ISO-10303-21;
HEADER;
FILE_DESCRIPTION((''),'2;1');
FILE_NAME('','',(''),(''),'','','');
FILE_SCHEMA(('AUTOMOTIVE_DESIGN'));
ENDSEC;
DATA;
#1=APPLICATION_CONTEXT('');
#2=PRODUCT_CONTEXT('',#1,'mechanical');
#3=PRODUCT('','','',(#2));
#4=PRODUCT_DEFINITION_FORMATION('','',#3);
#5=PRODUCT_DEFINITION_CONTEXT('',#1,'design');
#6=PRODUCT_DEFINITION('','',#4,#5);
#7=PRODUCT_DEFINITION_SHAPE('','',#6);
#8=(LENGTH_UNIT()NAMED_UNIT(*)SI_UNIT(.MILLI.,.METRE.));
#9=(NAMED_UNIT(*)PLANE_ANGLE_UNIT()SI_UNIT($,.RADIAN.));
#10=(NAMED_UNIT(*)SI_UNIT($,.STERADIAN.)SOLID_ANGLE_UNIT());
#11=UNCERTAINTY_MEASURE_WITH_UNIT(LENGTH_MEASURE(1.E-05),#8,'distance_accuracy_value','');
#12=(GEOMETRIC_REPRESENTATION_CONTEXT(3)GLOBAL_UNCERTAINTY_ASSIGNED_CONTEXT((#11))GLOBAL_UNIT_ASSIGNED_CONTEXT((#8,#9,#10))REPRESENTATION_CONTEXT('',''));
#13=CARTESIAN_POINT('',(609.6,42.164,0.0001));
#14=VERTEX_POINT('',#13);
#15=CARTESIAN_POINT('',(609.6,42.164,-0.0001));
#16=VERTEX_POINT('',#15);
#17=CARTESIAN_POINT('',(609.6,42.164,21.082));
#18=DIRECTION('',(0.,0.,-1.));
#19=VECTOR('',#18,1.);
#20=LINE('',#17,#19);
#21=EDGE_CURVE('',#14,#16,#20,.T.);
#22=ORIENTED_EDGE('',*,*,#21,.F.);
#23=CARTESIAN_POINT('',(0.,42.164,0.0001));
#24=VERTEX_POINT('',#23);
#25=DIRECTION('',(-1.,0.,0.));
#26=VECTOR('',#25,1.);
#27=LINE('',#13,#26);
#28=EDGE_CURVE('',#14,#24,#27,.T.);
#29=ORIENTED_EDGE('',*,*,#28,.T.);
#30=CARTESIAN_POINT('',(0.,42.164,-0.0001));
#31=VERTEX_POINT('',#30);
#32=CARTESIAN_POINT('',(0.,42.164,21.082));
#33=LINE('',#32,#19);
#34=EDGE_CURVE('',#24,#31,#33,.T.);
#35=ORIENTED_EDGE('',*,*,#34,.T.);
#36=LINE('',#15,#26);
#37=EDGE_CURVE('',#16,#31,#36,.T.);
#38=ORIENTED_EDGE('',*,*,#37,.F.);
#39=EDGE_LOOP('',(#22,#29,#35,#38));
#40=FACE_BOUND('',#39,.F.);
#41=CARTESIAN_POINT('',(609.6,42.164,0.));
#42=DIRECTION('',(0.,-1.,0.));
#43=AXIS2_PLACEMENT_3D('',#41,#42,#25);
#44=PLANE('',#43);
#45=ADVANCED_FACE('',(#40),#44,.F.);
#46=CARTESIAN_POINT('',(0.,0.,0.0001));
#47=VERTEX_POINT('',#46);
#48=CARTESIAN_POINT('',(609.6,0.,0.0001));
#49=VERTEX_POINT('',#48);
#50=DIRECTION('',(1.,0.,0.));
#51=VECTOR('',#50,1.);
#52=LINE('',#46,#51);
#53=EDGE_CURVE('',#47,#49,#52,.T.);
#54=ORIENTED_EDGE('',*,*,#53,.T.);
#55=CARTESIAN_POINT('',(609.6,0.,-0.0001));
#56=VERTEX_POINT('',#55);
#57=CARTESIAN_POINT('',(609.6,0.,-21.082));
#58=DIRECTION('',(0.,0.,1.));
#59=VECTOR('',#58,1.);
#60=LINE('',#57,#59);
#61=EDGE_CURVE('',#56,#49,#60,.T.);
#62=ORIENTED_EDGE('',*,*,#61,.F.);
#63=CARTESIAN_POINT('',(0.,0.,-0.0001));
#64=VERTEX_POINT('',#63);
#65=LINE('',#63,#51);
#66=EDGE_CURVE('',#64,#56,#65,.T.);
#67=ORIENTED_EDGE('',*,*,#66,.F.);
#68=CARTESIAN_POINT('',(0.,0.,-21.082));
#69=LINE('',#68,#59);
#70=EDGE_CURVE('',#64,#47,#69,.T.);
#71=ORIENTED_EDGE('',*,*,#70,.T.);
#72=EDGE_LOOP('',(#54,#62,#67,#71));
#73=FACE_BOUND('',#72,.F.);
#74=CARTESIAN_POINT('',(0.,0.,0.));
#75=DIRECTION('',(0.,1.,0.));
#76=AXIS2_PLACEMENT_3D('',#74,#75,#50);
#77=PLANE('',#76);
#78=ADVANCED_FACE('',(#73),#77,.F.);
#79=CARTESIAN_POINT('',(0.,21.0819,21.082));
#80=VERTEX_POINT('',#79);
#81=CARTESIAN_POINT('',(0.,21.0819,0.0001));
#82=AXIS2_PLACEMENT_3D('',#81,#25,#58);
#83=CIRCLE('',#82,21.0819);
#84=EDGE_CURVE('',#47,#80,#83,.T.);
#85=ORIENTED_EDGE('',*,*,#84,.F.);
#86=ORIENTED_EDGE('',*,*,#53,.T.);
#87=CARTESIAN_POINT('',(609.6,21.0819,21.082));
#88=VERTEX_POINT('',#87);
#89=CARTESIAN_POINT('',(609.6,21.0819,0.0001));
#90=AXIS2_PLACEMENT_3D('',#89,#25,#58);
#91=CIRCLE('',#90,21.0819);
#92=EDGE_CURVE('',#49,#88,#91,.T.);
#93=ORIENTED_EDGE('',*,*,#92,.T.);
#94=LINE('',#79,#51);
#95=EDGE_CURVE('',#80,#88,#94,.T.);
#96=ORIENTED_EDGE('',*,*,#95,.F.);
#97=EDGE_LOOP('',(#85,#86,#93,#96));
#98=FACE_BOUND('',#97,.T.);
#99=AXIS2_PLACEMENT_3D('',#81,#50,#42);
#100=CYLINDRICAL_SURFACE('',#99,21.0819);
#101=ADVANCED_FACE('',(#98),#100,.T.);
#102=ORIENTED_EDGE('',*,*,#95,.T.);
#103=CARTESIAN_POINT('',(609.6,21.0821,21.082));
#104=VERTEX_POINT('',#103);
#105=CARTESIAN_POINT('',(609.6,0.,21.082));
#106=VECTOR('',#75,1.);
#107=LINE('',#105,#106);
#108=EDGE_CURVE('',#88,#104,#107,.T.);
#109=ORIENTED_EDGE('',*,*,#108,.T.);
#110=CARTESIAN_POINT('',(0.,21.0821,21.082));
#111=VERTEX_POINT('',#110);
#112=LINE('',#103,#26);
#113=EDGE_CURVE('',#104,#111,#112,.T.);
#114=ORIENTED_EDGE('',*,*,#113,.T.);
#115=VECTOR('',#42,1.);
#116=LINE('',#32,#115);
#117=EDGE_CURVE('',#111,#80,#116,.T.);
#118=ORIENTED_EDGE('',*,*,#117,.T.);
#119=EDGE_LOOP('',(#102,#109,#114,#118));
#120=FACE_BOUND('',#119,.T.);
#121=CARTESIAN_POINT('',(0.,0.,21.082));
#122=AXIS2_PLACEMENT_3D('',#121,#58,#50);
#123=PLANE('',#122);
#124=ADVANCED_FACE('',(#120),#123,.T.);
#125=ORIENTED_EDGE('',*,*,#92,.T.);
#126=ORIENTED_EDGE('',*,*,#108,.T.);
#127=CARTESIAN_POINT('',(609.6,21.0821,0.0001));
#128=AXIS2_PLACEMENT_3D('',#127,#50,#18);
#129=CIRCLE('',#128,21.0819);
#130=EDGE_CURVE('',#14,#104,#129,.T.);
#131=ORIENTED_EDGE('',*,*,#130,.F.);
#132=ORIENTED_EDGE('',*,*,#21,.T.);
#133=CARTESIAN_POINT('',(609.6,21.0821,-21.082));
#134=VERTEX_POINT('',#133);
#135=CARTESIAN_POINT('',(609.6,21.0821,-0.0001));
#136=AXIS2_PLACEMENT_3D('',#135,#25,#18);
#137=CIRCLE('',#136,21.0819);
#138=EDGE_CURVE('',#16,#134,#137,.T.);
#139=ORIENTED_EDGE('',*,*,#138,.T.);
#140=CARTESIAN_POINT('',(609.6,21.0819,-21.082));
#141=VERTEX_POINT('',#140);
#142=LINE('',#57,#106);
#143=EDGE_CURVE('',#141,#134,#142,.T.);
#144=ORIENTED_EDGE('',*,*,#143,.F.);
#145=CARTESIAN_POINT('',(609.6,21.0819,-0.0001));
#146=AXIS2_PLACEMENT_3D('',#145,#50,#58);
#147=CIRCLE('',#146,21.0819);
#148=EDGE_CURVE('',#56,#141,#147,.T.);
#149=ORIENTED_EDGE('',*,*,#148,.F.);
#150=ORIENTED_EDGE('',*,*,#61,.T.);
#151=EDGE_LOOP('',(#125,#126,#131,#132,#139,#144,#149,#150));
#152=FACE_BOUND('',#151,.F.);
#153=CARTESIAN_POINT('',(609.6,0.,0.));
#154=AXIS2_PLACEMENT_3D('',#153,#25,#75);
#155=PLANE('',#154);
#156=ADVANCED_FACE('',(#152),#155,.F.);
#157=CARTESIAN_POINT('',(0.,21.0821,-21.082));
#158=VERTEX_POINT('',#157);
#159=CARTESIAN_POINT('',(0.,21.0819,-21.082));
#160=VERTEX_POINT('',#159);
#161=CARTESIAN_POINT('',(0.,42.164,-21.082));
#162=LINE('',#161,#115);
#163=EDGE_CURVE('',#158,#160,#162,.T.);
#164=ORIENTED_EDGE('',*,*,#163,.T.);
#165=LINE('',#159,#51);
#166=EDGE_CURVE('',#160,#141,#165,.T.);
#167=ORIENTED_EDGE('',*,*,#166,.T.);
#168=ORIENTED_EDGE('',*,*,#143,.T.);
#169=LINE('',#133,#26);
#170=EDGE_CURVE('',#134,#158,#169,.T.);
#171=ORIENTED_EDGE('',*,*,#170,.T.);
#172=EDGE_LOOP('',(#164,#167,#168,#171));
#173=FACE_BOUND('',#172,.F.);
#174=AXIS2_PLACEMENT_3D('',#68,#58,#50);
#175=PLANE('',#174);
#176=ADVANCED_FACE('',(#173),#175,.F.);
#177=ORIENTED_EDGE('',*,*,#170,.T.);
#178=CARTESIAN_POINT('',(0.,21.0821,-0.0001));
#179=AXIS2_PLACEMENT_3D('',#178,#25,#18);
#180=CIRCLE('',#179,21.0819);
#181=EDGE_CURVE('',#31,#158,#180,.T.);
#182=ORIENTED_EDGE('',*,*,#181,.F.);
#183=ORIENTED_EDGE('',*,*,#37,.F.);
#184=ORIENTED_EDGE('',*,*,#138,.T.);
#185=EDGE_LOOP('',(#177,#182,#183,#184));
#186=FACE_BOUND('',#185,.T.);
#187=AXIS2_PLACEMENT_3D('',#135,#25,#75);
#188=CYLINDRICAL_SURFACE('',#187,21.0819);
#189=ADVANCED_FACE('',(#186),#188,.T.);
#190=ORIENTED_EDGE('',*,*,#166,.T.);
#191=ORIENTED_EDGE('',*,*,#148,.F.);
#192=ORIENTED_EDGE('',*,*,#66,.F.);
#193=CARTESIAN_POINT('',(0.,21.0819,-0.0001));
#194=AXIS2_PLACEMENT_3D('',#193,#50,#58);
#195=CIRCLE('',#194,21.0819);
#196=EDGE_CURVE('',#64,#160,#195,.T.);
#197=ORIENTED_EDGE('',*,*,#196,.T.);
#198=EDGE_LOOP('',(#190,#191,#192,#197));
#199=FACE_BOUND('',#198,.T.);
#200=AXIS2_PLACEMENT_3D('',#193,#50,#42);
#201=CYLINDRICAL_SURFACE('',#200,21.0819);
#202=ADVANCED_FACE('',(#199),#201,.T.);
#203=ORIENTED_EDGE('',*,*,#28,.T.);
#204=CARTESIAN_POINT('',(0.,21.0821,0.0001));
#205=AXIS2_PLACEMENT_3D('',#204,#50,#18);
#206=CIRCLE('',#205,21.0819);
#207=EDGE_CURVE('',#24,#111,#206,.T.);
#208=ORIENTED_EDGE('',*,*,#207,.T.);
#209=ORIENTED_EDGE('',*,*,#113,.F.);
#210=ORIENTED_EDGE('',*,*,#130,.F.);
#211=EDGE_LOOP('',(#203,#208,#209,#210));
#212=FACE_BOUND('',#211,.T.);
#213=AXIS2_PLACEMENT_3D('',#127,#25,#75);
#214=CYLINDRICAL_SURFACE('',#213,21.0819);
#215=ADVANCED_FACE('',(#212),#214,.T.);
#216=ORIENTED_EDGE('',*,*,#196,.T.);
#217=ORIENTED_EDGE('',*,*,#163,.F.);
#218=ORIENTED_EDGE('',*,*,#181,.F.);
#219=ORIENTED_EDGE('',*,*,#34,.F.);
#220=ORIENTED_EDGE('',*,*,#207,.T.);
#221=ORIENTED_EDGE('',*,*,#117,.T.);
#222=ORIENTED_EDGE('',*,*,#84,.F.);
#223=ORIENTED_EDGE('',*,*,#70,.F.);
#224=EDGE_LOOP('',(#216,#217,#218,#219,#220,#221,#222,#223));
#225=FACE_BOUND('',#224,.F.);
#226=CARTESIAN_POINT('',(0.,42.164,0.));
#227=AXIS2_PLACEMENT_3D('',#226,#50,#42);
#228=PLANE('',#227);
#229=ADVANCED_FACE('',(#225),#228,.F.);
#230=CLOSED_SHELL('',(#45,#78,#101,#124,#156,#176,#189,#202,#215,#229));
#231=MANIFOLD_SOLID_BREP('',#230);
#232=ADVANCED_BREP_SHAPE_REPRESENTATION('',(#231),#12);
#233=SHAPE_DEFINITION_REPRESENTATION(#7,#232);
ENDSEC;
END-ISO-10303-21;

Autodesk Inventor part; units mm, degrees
ref_plane "YZ Plane" through (0, 0, 0) normal (1, 0, 0) x (0, 1, 0)
sketch "1.90 Caprail" plane through (0, 0, 0) normal (0, 0, 1) x (1, 0, 0)
  line L0 (-57.7384, 25.6152) -> (-57.7384, 36.7912) construction
  arc A0 (-65.9934, 36.7912) -> (-67.5174, 35.2672) centre (-65.9934, 35.2672) ccw
  arc A1 (-47.9594, 35.2672) -> (-49.4834, 36.7912) centre (-49.4834, 35.2672) ccw
  arc A2 (-69.8345, 6.4876) -> (-69.016, 6.9384) centre (-69.5494, 6.9384) ccw
  line L1 (-69.016, 6.9384) -> (-69.016, 35.2672)
  arc A3 (-65.9934, 38.2898) -> (-69.016, 35.2672) centre (-65.9934, 35.2672) ccw
  line L2 (-65.9934, 38.2898) -> (-49.4834, 38.2898)
  arc A4 (-46.4608, 35.2672) -> (-49.4834, 38.2898) centre (-49.4834, 35.2672) ccw
  line L3 (-46.4608, 35.2672) -> (-46.4608, 6.9384)
  arc A5 (-46.4608, 6.9384) -> (-45.6423, 6.4876) centre (-45.9274, 6.9384) ccw
  arc A6 (-45.6423, 6.4876) -> (-69.8345, 6.4876) centre (-57.7384, 25.6152) ccw
  line L4 (-47.9594, 6.9384) -> (-47.9594, 35.2672)
  line L5 (-49.4834, 36.7912) -> (-65.9934, 36.7912)
  line L6 (-67.5174, 35.2672) -> (-67.5174, 6.9384)
  arc A7 (-70.5058, 5.1455) -> (-67.5174, 6.9384) centre (-69.5494, 6.9384) ccw
  arc A8 (-47.9594, 6.9384) -> (-44.9711, 5.1455) centre (-45.9274, 6.9384) ccw
  arc A9 (-70.5083, 5.1411) -> (-44.9685, 5.1411) centre (-57.7384, 25.6152) ccw
  circle A10 centre (-57.7384, 25.6152) radius 24.13 construction
  arc A11 (-70.5058, 5.1455) -> (-70.5083, 5.1411) centre (-70.507, 5.1433) ccw
  arc A12 (-44.9685, 5.1411) -> (-44.9711, 5.1455) centre (-44.9699, 5.1433) ccw
  point P0 (-47.9594, 36.7912)
  point P1 (-67.5174, 36.7912)
  dimension "d0" = 48.26
  dimension "d1" = 19.558
  dimension "d2" = 2.032
  dimension "d3" = 11.176
  dimension "d4" = 1.524
  dimension "d5" = 1.4986
  dimension "d6" = 0.0025
sketch "1.66 Caprail" plane through (0, 0, 0) normal (0, 0, 1) x (1, 0, 0)
  arc A0 (55.7245, -3.4499) -> (81.6283, -3.4499) centre (68.6764, 13.1843) ccw
  arc A1 (55.7275, -3.4458) -> (58.8974, -1.7623) centre (56.8654, -1.7623) ccw
  arc A2 (78.4554, -1.7623) -> (81.6253, -3.4458) centre (80.4874, -1.7623) ccw
  line L0 (58.8974, -1.7623) -> (58.8974, 20.8043)
  line L1 (60.4214, 22.3283) -> (76.9314, 22.3283)
  line L2 (78.4554, 20.8043) -> (78.4554, -1.7623)
  line L3 (68.6764, 22.3283) -> (68.6764, 13.1843) construction
  arc A3 (60.4214, 22.3283) -> (58.8974, 20.8043) centre (60.4214, 20.8043) ccw
  arc A4 (78.4554, 20.8043) -> (76.9314, 22.3283) centre (76.9314, 20.8043) ccw
  arc A5 (79.954, -1.7623) -> (80.8181, -2.1808) centre (80.4874, -1.7623) ccw
  line L4 (79.954, -1.7623) -> (79.954, 20.8043)
  arc A6 (79.954, 20.8043) -> (76.9314, 23.8269) centre (76.9314, 20.8043) ccw
  line L5 (76.9314, 23.8269) -> (60.4214, 23.8269)
  arc A7 (60.4214, 23.8269) -> (57.3988, 20.8043) centre (60.4214, 20.8043) ccw
  line L6 (57.3988, 20.8043) -> (57.3988, -1.7623)
  arc A8 (56.5347, -2.1808) -> (57.3988, -1.7623) centre (56.8654, -1.7623) ccw
  arc A9 (80.8181, -2.1808) -> (56.5347, -2.1808) centre (68.6764, 13.1843) ccw
  circle A10 centre (68.6764, 13.1843) radius 21.082 construction
  arc A11 (55.7275, -3.4458) -> (55.7245, -3.4499) centre (55.7261, -3.4479) ccw
  arc A12 (81.6283, -3.4499) -> (81.6253, -3.4458) centre (81.6268, -3.4479) ccw
  point P0 (58.8974, 22.3283)
  point P1 (78.4554, 22.3283)
  dimension "d7" = 42.164
  dimension "d8" = 19.558
  dimension "d9" = 9.144
  dimension "d10" = 2.032
  dimension "d11" = 1.524
  dimension "d12" = 1.4986
  dimension "d13" = 0.0025
sketch "1.50 Caprail" plane through (0, 0, 0) normal (0, 0, 1) x (1, 0, 0)
  arc A0 (154.6368, -0.6357) -> (180.8596, -0.6357) centre (167.7482, 13.1843) ccw
  arc A1 (154.6402, -0.6319) -> (157.9692, 0.9323) centre (155.9372, 0.9323) ccw
  arc A2 (177.5272, 0.9323) -> (180.8562, -0.6319) centre (179.5592, 0.9323) ccw
  circle A3 centre (167.7482, 13.1843) radius 19.05 construction
  arc A4 (179.0258, 0.9323) -> (179.9294, 0.5483) centre (179.5592, 0.9323) ccw
  line L0 (179.0258, 0.9323) -> (179.0258, 23.0903)
  arc A5 (179.0258, 23.0903) -> (176.0032, 26.1129) centre (176.0032, 23.0903) ccw
  line L1 (176.0032, 26.1129) -> (159.4932, 26.1129)
  arc A6 (159.4932, 26.1129) -> (156.4706, 23.0903) centre (159.4932, 23.0903) ccw
  line L2 (156.4706, 23.0903) -> (156.4706, 0.9323)
  arc A7 (155.567, 0.5483) -> (156.4706, 0.9323) centre (155.9372, 0.9323) ccw
  arc A8 (179.9294, 0.5483) -> (155.567, 0.5483) centre (167.7482, 13.1843) ccw
  line L3 (157.9692, 0.9323) -> (157.9692, 23.0903)
  line L4 (159.4932, 24.6143) -> (176.0032, 24.6143)
  line L5 (177.5272, 23.0903) -> (177.5272, 0.9323)
  arc A9 (159.4932, 24.6143) -> (157.9692, 23.0903) centre (159.4932, 23.0903) ccw
  arc A10 (177.5272, 23.0903) -> (176.0032, 24.6143) centre (176.0032, 23.0903) ccw
  line L6 (167.7482, 24.6143) -> (167.7482, 13.1843) construction
  arc A11 (154.6402, -0.6319) -> (154.6368, -0.6357) centre (154.6385, -0.6339) ccw
  arc A12 (180.8596, -0.6357) -> (180.8562, -0.6319) centre (180.8578, -0.6339) ccw
  point P0 (157.9692, 24.6143)
  point P1 (177.5272, 24.6143)
  dimension "d14" = 38.1
  dimension "d15" = 19.558
  dimension "d16" = 2.032
  dimension "d17" = 1.524
  dimension "d18" = 11.43
  dimension "d19" = 1.4986
  dimension "d20" = 0.0025
sketch "1.90 Caprail Outside Edge" plane through (0, 0, 0) normal (0, 0, 1) x (1, 0, 0)
  arc A0 (8.6191, 38.6174) -> (-17.175, 38.6174) centre (-4.278, 59.0116) ccw
  line L0 (5.501, 40.3348) -> (5.501, 68.5975)
  line L1 (3.977, 70.1215) -> (-12.533, 70.1215)
  line L2 (-14.057, 68.5975) -> (-14.057, 40.3348)
  line L3 (-4.278, 59.0116) -> (-4.278, 70.1215) construction
  arc A1 (-17.175, 38.6174) -> (-14.057, 40.3348) centre (-16.089, 40.3348) ccw
  arc A2 (5.501, 40.3348) -> (8.6191, 38.6174) centre (7.533, 40.3348) ccw
  arc A3 (-12.533, 70.1215) -> (-14.057, 68.5975) centre (-12.533, 68.5975) ccw
  arc A4 (5.501, 68.5975) -> (3.977, 70.1215) centre (3.977, 68.5975) ccw
  point P0 (5.501, 70.1215)
  point P1 (-14.057, 70.1215)
  point P2 (-14.057, 36.9519)
  point P3 (5.501, 36.9519)
  dimension "d21" = 13.02
  dimension "d22" = 19.558
  dimension "d23" = 24.13
  dimension "d24" = 2.032
  dimension "d25" = 1.524
sketch "1.66 Caprail Outside Edge" plane through (0, 0, 0) normal (0, 0, 1) x (1, 0, 0)
  arc A0 (-64.2087, 6.8983) -> (-90.3503, 6.8983) centre (-77.2795, 23.4393) ccw
  line L0 (-67.5005, 8.4926) -> (-67.5005, 30.9932)
  line L1 (-69.0245, 32.5172) -> (-85.5345, 32.5172)
  line L2 (-87.0585, 30.9932) -> (-87.0585, 8.4926)
  line L3 (-77.2795, 23.4393) -> (-77.2795, 32.5172) construction
  arc A1 (-90.3503, 6.8983) -> (-87.0585, 8.4926) centre (-89.0905, 8.4926) ccw
  arc A2 (-67.5005, 8.4926) -> (-64.2087, 6.8983) centre (-65.4685, 8.4926) ccw
  arc A3 (-85.5345, 32.5172) -> (-87.0585, 30.9932) centre (-85.5345, 30.9932) ccw
  arc A4 (-67.5005, 30.9932) -> (-69.0245, 32.5172) centre (-69.0245, 30.9932) ccw
  point P0 (-67.5005, 32.5172)
  point P1 (-87.0585, 32.5172)
  point P2 (-87.0585, 4.7625)
  point P3 (-67.5005, 4.7625)
  dimension "d26" = 12.004
  dimension "d27" = 19.558
  dimension "d28" = 21.082
  dimension "d29" = 2.032
  dimension "d30" = 1.524
sketch "1.50 Caprail Outside Edge" plane through (0, 0, 0) normal (0, 0, 1) x (1, 0, 0)
  arc A0 (-129.2922, 11.7711) -> (-155.7348, 11.7711) centre (-142.5135, 25.486) ccw
  line L0 (-132.7345, 13.234) -> (-132.7345, 35.4784)
  line L1 (-134.2585, 37.0024) -> (-150.7685, 37.0024)
  line L2 (-152.2925, 35.4784) -> (-152.2925, 13.234)
  line L3 (-142.5135, 25.486) -> (-142.5135, 37.0024) construction
  arc A1 (-155.7348, 11.7711) -> (-152.2925, 13.234) centre (-154.3245, 13.234) ccw
  arc A2 (-132.7345, 13.234) -> (-129.2922, 11.7711) centre (-130.7025, 13.234) ccw
  arc A3 (-150.7685, 37.0024) -> (-152.2925, 35.4784) centre (-150.7685, 35.4784) ccw
  arc A4 (-132.7345, 35.4784) -> (-134.2585, 37.0024) centre (-134.2585, 35.4784) ccw
  point P0 (-132.7345, 37.0024)
  point P1 (-152.2925, 37.0024)
  point P2 (-152.2925, 9.1375)
  point P3 (-132.7345, 9.1375)
  dimension "d31" = 7.5336
  dimension "d32" = 19.558
  dimension "d33" = 19.05
  dimension "d34" = 2.032
  dimension "d35" = 1.524
sketch "Sketch1" plane through (0, 0, 0) normal (0, 0, 1) x (1, 0, 0)
  line L0 (0, 0) -> (609.6, 0)
  line L1 (609.6, 0) -> (609.6, 42.164)
  line L2 (609.6, 42.164) -> (0, 42.164)
  line L3 (0, 42.164) -> (0, 0)
  dimension "d37" = 42.164
  dimension "d38" = 609.6
extrude "Extrusion1" add sketch "Sketch1" along normal mid plane 42.164
fillet "Fillet1" radius 21.082 4 edges at (304.8, 42.164, -21.082) (304.8, 42.164, 21.082) (304.8, 0, -21.082) (304.8, 0, 21.082)
equation "\"d37\" = PipeOD"
equation "\"d39\" = PipeOD"
equation "\"d41\" = 0.5 * PipeOD"
equation "\"PipeOD\" = 42.164"
equation "\"PipeWallThickness\" = 3.556"
equation "\"Length\" = 609.6"
properties part number "Update_SetBaseQuantity" material "P792.4"
